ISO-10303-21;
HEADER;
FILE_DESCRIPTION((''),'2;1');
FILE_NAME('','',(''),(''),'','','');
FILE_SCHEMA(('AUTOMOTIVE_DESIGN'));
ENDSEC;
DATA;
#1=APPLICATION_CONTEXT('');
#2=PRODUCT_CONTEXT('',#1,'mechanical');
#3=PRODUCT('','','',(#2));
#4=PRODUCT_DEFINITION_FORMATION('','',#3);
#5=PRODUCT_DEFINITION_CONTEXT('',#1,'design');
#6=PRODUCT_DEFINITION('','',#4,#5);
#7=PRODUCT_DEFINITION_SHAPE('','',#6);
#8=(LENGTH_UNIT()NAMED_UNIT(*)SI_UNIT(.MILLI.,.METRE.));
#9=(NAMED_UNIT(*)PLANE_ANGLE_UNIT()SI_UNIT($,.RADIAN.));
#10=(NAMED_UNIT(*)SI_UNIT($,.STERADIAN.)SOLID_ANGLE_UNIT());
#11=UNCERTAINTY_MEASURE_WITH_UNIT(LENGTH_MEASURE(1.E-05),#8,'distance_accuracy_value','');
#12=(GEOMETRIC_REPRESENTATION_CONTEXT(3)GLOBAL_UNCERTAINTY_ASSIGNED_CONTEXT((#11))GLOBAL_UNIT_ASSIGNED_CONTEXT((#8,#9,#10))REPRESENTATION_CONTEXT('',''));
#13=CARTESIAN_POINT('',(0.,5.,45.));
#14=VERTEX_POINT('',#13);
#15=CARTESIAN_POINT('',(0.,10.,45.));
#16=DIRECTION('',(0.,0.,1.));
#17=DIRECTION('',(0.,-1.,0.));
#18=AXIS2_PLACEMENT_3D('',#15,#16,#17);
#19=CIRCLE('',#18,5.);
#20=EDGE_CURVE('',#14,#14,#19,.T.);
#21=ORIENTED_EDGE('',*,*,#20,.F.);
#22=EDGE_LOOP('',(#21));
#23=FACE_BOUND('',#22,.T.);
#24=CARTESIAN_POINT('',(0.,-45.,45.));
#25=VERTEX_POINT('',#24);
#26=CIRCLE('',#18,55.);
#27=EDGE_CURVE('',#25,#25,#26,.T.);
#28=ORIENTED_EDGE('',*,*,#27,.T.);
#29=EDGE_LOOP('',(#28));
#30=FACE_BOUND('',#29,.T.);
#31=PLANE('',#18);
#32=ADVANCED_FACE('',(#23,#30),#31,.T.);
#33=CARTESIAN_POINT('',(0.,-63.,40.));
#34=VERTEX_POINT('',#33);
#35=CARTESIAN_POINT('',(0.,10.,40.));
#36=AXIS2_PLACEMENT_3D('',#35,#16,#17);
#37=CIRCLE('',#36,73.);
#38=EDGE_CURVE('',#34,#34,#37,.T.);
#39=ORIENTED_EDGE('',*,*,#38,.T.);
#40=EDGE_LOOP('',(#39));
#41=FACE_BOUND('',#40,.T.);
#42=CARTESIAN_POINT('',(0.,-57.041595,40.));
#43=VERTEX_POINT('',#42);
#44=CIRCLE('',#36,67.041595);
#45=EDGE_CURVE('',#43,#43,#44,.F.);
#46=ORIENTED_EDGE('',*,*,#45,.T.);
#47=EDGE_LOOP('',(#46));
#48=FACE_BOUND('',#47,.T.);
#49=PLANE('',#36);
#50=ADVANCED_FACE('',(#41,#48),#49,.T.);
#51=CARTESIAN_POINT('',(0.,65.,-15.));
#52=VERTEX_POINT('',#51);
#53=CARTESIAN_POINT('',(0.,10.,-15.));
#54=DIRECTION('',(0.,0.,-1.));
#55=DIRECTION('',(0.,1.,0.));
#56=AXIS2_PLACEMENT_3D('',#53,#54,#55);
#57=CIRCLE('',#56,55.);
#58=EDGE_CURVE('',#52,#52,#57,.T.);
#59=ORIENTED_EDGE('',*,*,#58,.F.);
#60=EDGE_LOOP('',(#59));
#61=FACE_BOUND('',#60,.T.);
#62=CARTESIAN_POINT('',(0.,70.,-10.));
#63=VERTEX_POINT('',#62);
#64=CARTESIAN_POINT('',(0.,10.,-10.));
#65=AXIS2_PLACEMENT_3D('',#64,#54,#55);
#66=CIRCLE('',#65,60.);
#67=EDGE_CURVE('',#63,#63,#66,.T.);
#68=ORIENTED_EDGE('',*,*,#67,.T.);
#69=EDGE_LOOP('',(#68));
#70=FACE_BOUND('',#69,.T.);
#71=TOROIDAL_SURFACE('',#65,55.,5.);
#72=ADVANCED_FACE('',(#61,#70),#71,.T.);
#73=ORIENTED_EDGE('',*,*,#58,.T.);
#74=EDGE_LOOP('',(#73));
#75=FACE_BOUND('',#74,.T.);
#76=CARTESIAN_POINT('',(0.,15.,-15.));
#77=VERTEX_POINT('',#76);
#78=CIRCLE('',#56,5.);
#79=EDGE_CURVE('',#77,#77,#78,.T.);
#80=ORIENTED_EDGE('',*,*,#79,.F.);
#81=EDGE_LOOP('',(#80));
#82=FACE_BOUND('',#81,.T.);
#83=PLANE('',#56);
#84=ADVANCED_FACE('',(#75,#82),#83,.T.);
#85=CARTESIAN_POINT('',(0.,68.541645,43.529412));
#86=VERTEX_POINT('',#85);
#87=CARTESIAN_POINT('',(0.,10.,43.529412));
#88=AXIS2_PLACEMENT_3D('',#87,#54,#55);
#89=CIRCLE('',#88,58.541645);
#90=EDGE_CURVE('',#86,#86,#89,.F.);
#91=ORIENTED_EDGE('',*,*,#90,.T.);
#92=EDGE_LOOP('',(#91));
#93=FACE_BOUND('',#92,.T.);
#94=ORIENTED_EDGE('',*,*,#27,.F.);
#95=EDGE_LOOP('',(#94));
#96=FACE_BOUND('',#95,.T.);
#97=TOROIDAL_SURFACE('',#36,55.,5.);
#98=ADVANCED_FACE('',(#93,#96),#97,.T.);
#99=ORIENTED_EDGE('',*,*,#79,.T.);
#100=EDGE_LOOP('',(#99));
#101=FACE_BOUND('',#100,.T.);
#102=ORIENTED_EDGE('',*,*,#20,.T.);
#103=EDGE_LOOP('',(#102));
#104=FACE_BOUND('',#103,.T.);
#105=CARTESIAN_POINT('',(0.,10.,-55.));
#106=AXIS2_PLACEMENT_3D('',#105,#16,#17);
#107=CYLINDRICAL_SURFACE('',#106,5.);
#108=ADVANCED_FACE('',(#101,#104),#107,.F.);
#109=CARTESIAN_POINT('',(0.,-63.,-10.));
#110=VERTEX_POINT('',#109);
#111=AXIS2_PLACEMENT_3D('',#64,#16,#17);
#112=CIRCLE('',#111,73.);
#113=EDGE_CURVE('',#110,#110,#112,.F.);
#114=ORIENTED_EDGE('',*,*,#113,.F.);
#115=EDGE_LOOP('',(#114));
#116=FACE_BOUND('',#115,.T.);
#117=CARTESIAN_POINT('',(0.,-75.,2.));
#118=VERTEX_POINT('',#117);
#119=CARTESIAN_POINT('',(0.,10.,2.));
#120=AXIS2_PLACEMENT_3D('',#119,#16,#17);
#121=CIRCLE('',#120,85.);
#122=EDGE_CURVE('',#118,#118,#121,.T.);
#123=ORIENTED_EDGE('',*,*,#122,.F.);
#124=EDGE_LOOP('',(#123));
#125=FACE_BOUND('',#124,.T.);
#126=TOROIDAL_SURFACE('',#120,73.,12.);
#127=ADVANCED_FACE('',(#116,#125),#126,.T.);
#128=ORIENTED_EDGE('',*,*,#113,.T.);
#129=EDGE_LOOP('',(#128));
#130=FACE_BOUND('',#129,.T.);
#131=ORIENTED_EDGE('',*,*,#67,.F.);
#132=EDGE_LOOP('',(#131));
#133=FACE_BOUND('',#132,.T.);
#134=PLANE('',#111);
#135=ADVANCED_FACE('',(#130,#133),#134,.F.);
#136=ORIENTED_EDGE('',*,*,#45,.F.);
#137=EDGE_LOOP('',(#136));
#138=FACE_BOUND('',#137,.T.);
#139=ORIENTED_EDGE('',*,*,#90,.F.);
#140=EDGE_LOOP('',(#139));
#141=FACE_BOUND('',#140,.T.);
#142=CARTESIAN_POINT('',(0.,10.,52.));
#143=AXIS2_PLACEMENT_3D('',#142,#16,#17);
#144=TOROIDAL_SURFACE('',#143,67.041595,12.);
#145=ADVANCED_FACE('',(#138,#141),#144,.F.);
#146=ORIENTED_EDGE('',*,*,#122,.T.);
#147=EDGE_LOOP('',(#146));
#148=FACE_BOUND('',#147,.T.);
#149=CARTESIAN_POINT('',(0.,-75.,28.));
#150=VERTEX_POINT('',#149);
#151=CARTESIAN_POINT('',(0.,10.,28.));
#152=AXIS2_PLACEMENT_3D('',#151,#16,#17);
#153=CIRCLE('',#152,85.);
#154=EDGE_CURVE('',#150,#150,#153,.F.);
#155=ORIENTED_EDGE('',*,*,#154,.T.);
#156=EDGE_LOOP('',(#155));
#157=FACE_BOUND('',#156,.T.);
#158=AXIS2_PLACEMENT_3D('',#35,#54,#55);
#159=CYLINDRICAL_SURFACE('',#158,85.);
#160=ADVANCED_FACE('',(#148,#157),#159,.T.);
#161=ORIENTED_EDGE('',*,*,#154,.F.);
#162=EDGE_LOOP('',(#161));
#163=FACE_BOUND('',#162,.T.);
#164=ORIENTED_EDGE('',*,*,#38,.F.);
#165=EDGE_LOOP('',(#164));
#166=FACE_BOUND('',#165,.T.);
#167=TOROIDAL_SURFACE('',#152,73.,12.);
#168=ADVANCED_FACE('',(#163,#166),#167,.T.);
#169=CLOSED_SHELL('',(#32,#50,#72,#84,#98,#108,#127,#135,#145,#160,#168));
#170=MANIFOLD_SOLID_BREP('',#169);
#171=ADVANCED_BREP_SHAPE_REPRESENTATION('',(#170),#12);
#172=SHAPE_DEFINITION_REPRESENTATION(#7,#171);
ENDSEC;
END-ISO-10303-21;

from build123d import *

# Parameters (mm, degrees)
SKETCH2_R             = 85
BOSS_EXTRUDE1_DEPTH   = 50
SKETCH3_R             = 60
BOSS_EXTRUDE2_DEPTH   = 5
BOSS_EXTRUDE3_START   = 5
SKETCH4_R             = 60
BOSS_EXTRUDE3_DEPTH   = 5
SKETCH5_R             = 5
CUT_EXTRUDE1_DEPTH    = 100
BODY_MOVE_COPY1_ANGLE = 90
FILLET1_R             = 5
FILLET2_R             = 12


with BuildPart() as part:
    # Sketch2 → Boss-Extrude1 (new body)
    with BuildSketch(Plane(origin=(0, 0, 0), x_dir=(1, 0, 0), z_dir=(0, 1, 0))):
        with Locations(Location((0, 0, 0), (0, 0, 270))):
            Circle(SKETCH2_R)
    extrude(amount=BOSS_EXTRUDE1_DEPTH)

    # Sketch3 → Boss-Extrude2 (add)
    with BuildSketch(Plane(origin=(0, 50, 0), x_dir=(1, 0, 0), z_dir=(0, 1, 0))):
        with Locations(Location((0, 0, 0), (0, 0, 270))):
            Circle(SKETCH3_R)
    extrude(amount=BOSS_EXTRUDE2_DEPTH)

    # Sketch4 → Boss-Extrude3 (add)
    with BuildSketch(Plane.XZ.offset(BOSS_EXTRUDE3_START)):
        with Locations(Location((0, 0, 0), (0, 0, 90))):
            Circle(SKETCH4_R)
    extrude(amount=-BOSS_EXTRUDE3_DEPTH)

    # Sketch5 → Cut-Extrude1 (cut)
    with BuildSketch(Plane(origin=(0, 55, 0), x_dir=(1, 0, 0), z_dir=(0, 1, 0))):
        with Locations(Location((0, 0, 0), (0, 0, 270))):
            Circle(SKETCH5_R)
    extrude(amount=-CUT_EXTRUDE1_DEPTH, mode=Mode.SUBTRACT)


with BuildPart() as part_1:
    # Body-Move/Copy1: moved
    add(part.part.rotate(Axis((0, 10, 0), (1, 0, 0)), BODY_MOVE_COPY1_ANGLE))

    # Fillet1
    fillet1_edges = [part_1.edges().sort_by_distance(p)[0] for p in [
        (0, 70, -15),
        (0, 70, 45),
    ]]
    fillet(fillet1_edges, radius=FILLET1_R - 0.0001)  # a hair under: the kernel refuses the full size

    # Fillet2
    fillet2_edges = [part_1.edges().sort_by_distance(p)[0] for p in [
        (0, 95, -10),
        (0, 95, 40),
        (0, 70, 40),
    ]]
    fillet(fillet2_edges, radius=FILLET2_R)


solid = part_1.part
